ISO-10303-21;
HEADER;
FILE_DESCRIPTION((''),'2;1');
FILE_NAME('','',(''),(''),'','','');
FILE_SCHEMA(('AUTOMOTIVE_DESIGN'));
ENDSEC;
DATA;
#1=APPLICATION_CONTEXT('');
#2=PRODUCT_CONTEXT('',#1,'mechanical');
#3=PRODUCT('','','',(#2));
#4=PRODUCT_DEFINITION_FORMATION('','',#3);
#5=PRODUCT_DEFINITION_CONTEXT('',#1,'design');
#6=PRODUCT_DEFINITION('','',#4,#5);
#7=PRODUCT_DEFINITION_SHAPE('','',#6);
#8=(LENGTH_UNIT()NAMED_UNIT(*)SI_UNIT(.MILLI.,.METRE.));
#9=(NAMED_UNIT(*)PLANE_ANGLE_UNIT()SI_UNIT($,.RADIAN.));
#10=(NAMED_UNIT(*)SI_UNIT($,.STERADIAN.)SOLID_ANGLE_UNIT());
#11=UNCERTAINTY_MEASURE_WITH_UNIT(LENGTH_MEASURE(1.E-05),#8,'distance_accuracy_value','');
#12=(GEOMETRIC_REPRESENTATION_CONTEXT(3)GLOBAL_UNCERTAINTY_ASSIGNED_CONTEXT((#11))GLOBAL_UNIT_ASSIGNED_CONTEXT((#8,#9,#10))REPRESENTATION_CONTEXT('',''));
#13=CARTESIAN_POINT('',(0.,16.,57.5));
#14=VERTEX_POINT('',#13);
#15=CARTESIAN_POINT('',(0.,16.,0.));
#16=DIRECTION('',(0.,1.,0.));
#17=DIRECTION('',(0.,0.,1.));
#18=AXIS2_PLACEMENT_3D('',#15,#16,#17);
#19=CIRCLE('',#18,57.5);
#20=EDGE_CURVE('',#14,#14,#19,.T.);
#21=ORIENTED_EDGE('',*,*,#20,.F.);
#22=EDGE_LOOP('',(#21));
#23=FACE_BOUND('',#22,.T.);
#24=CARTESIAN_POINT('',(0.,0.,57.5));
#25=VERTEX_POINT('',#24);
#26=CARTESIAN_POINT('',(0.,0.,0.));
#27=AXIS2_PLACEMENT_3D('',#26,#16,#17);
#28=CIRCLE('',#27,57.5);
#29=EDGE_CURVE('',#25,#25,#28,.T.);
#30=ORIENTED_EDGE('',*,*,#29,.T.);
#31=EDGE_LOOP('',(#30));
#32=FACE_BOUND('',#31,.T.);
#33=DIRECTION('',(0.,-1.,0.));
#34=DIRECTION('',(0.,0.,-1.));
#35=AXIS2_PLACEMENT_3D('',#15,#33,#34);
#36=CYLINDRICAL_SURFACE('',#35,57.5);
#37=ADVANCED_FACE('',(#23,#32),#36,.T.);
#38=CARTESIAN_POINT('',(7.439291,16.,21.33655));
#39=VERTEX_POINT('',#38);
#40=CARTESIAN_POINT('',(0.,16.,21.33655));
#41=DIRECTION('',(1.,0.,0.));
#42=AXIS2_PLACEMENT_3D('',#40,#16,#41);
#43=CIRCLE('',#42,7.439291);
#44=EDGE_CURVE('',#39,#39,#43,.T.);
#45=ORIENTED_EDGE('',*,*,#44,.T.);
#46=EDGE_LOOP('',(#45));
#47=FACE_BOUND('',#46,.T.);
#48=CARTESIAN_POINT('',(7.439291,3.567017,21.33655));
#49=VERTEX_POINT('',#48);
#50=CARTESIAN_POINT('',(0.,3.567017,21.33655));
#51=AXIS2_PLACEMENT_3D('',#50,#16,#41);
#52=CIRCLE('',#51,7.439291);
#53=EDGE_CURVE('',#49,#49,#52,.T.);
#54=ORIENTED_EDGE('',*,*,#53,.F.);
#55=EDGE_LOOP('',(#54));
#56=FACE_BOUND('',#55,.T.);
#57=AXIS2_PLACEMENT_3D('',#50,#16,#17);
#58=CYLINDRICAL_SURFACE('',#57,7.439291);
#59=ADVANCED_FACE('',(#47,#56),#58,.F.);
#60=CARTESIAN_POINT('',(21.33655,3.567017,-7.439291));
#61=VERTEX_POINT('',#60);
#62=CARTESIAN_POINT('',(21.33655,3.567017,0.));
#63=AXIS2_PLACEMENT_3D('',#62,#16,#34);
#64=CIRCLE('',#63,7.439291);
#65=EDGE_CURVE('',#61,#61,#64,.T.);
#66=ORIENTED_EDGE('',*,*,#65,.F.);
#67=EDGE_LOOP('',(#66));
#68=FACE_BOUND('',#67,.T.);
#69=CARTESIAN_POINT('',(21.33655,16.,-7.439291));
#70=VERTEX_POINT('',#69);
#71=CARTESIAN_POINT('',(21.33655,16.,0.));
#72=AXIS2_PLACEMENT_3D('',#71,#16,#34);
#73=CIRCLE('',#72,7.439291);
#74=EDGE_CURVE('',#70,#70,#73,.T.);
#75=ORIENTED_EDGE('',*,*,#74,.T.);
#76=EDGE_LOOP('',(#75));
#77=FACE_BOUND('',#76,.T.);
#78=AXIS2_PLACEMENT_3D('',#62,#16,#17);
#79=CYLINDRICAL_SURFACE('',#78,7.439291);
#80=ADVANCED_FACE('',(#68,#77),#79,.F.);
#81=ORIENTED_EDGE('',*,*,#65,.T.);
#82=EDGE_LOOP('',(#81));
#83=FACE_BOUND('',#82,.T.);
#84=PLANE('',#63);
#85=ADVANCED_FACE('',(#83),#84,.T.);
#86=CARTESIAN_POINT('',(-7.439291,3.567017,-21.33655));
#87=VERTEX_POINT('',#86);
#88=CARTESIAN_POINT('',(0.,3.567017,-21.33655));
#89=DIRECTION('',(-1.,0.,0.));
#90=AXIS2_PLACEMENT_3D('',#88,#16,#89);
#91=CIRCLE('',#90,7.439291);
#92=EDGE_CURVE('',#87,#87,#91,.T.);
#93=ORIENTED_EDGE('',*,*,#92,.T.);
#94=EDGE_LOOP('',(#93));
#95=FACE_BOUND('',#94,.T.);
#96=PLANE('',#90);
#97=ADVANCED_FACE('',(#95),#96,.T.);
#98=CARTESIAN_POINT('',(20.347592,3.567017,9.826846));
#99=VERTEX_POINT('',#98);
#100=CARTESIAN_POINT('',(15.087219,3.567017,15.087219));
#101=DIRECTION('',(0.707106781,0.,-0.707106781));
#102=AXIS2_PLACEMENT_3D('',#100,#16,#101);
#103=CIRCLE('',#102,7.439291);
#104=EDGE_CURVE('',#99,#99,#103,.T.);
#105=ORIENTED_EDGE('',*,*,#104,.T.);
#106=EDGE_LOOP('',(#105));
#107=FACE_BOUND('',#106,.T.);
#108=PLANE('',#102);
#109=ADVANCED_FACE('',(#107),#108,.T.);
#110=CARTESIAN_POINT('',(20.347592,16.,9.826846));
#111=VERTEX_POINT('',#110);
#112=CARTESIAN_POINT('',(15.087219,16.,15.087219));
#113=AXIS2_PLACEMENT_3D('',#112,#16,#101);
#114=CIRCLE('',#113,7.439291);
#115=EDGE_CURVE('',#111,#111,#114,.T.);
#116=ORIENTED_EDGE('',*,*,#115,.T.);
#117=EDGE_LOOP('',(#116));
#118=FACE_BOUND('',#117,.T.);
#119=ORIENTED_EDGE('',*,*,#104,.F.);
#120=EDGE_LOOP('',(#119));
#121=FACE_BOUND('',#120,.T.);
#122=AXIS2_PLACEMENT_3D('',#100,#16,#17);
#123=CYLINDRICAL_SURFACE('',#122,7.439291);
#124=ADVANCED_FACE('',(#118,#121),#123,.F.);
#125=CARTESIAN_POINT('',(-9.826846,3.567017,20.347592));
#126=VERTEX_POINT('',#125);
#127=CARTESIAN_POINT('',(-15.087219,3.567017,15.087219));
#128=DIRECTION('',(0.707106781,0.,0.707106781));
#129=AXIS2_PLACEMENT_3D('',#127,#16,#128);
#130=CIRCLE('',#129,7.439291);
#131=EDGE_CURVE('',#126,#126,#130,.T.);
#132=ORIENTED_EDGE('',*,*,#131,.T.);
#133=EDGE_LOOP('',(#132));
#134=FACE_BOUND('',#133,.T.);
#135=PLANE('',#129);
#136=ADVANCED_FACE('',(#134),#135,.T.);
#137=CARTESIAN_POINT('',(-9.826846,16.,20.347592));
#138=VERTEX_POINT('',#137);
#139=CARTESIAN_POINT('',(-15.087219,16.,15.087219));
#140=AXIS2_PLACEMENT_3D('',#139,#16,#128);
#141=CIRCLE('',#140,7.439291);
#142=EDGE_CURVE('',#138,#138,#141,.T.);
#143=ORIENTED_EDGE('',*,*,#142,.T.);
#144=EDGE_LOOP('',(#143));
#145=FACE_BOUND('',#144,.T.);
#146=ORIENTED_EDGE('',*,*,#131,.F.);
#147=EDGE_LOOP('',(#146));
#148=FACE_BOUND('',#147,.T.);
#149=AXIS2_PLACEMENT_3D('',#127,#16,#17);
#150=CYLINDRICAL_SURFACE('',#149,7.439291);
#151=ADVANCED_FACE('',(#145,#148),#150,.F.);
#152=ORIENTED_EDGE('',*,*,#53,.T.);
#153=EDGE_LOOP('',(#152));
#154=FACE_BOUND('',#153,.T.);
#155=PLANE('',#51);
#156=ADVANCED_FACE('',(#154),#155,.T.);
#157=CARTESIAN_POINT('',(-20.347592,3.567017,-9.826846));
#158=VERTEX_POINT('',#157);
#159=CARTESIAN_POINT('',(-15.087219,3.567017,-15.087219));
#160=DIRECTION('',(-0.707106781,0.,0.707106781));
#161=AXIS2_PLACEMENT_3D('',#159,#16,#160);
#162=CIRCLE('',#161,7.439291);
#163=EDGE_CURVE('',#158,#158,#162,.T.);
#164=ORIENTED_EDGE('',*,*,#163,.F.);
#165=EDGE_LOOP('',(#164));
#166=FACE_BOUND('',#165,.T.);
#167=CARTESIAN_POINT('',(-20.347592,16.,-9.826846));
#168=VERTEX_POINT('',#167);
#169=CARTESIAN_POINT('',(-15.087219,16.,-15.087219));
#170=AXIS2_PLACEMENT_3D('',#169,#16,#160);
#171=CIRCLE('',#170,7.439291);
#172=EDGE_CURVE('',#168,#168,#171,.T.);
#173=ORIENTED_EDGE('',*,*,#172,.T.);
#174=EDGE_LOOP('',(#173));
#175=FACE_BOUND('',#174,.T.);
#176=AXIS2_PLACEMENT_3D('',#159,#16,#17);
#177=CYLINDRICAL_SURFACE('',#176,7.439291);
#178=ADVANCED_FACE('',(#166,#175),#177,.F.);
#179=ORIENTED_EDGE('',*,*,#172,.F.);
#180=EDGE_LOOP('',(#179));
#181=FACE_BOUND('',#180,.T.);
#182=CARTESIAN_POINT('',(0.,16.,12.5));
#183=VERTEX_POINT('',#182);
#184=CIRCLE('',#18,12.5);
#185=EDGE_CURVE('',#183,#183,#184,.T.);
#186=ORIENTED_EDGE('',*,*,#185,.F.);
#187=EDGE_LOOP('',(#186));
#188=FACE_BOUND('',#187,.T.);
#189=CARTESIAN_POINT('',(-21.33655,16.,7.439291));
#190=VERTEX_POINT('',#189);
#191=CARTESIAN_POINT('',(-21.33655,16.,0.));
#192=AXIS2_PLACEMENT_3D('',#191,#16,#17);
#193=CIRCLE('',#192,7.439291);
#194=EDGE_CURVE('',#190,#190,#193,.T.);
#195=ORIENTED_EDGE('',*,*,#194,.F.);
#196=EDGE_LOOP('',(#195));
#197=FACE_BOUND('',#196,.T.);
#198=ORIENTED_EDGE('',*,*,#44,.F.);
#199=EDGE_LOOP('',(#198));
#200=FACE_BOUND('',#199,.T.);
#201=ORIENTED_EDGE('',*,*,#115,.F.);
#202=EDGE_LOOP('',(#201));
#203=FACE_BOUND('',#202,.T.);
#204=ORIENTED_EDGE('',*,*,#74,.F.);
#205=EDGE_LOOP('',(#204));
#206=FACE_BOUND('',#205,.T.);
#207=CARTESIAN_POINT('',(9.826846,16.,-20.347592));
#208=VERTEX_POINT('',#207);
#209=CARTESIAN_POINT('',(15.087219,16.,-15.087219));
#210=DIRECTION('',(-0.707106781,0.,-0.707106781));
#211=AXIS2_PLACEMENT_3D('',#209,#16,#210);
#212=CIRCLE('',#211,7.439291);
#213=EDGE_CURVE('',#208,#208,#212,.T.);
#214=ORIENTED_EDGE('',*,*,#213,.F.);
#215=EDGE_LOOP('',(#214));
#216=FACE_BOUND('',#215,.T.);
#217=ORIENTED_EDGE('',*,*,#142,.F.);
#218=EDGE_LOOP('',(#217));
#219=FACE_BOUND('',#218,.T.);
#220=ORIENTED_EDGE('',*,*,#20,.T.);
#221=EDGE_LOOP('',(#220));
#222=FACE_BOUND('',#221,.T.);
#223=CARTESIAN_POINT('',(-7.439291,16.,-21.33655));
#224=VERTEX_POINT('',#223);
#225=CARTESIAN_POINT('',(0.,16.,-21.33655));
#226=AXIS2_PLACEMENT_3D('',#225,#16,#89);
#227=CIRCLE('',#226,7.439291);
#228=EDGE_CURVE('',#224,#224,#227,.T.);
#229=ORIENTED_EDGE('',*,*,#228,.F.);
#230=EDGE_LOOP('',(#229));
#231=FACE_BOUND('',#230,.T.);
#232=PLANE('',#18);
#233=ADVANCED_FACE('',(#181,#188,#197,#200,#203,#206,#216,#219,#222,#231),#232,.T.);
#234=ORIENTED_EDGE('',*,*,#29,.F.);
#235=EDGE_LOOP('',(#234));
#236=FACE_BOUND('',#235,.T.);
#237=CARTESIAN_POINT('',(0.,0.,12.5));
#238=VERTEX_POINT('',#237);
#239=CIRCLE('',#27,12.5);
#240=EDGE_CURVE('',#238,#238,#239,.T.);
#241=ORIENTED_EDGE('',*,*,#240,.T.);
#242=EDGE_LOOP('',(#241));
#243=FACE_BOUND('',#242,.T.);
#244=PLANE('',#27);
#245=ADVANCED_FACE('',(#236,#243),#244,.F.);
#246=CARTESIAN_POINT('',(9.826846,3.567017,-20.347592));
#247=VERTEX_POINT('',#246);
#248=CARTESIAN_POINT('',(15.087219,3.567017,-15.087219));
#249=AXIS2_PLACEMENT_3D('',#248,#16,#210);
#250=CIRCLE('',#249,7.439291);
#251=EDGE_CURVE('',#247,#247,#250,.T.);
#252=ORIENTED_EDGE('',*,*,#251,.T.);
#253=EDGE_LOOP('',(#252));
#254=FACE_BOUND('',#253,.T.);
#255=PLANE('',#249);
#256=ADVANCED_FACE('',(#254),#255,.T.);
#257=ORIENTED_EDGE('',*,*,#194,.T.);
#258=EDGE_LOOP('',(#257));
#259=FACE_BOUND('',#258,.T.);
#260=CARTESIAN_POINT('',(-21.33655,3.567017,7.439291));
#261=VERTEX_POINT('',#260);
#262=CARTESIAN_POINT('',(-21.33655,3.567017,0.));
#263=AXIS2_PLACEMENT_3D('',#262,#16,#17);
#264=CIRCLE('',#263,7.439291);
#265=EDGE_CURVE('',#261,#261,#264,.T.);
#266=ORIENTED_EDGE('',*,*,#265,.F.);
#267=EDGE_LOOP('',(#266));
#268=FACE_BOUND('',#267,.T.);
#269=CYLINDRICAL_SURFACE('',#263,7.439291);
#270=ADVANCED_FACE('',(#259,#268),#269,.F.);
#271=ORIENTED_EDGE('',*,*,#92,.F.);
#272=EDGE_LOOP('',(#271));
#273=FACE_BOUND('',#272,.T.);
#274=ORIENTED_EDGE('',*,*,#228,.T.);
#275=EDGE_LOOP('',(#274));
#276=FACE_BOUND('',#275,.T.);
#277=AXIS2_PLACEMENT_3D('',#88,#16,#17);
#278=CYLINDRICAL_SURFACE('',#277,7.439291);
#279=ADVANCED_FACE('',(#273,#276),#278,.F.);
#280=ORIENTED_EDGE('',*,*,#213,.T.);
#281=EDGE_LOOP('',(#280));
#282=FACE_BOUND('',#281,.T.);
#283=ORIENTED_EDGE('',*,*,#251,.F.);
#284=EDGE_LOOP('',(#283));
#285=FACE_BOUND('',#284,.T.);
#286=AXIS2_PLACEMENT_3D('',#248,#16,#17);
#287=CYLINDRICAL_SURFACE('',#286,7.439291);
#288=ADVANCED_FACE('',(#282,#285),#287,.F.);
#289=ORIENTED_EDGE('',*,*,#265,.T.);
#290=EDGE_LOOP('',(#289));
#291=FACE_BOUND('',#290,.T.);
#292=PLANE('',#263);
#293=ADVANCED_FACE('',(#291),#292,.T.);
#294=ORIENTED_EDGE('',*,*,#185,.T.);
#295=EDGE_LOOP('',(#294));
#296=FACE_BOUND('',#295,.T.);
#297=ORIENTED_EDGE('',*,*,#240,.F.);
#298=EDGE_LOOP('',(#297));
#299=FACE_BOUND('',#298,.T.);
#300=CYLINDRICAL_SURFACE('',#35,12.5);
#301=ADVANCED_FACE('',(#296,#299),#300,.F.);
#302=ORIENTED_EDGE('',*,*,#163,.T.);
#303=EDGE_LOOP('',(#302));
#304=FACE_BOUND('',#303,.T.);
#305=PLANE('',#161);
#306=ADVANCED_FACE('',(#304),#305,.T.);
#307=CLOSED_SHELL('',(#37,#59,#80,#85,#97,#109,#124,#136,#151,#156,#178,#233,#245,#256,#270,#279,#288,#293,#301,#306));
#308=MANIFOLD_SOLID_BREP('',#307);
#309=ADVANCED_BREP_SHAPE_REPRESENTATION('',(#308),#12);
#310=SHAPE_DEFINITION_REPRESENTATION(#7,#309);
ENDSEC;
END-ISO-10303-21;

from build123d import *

# Parameters (mm, degrees)
SKETCH1_R           = 57.5
BOSS_EXTRUDE1_DEPTH = 16
SKETCH2_R           = 12.5
CUT_EXTRUDE1_DEPTH  = 83.876414015
SKETCH3_R           = 7.439291055
CUT_EXTRUDE2_DEPTH  = 12.432982932
CIRPATTERN1_COUNT   = 8


with BuildPart() as part:
    # Sketch1 → Boss-Extrude1 (new body)
    with BuildSketch(Plane(origin=(0, 0, 0), x_dir=(1, 0, 0), z_dir=(0, 1, 0))):
        Circle(SKETCH1_R)
    extrude(amount=BOSS_EXTRUDE1_DEPTH)

    # Sketch2 → Cut-Extrude1 (cut, through all)
    with BuildSketch(Plane(origin=(0, 0, 0), x_dir=(1, 0, 0), z_dir=(0, 1, 0))):
        Circle(SKETCH2_R)
    extrude(amount=CUT_EXTRUDE1_DEPTH, mode=Mode.SUBTRACT)

    # Sketch3 → Cut-Extrude2 (cut)
    with BuildSketch(Plane(origin=(0, 16, 0), x_dir=(1, 0, 0), z_dir=(0, 1, 0))):
        with Locations((-21.336549902, 0)):
            Circle(SKETCH3_R)
    cut_extrude2 = extrude(amount=-CUT_EXTRUDE2_DEPTH, mode=Mode.SUBTRACT)

    # CirPattern1: Cut-Extrude2 ×8 about axis
    cirpattern1_axis = Axis((0, 0, 0), (0, 1, 0))
    for i in range(1, CIRPATTERN1_COUNT):
        add(cut_extrude2.rotate(cirpattern1_axis, i * 360 / CIRPATTERN1_COUNT), mode=Mode.SUBTRACT)


solid = part.part
